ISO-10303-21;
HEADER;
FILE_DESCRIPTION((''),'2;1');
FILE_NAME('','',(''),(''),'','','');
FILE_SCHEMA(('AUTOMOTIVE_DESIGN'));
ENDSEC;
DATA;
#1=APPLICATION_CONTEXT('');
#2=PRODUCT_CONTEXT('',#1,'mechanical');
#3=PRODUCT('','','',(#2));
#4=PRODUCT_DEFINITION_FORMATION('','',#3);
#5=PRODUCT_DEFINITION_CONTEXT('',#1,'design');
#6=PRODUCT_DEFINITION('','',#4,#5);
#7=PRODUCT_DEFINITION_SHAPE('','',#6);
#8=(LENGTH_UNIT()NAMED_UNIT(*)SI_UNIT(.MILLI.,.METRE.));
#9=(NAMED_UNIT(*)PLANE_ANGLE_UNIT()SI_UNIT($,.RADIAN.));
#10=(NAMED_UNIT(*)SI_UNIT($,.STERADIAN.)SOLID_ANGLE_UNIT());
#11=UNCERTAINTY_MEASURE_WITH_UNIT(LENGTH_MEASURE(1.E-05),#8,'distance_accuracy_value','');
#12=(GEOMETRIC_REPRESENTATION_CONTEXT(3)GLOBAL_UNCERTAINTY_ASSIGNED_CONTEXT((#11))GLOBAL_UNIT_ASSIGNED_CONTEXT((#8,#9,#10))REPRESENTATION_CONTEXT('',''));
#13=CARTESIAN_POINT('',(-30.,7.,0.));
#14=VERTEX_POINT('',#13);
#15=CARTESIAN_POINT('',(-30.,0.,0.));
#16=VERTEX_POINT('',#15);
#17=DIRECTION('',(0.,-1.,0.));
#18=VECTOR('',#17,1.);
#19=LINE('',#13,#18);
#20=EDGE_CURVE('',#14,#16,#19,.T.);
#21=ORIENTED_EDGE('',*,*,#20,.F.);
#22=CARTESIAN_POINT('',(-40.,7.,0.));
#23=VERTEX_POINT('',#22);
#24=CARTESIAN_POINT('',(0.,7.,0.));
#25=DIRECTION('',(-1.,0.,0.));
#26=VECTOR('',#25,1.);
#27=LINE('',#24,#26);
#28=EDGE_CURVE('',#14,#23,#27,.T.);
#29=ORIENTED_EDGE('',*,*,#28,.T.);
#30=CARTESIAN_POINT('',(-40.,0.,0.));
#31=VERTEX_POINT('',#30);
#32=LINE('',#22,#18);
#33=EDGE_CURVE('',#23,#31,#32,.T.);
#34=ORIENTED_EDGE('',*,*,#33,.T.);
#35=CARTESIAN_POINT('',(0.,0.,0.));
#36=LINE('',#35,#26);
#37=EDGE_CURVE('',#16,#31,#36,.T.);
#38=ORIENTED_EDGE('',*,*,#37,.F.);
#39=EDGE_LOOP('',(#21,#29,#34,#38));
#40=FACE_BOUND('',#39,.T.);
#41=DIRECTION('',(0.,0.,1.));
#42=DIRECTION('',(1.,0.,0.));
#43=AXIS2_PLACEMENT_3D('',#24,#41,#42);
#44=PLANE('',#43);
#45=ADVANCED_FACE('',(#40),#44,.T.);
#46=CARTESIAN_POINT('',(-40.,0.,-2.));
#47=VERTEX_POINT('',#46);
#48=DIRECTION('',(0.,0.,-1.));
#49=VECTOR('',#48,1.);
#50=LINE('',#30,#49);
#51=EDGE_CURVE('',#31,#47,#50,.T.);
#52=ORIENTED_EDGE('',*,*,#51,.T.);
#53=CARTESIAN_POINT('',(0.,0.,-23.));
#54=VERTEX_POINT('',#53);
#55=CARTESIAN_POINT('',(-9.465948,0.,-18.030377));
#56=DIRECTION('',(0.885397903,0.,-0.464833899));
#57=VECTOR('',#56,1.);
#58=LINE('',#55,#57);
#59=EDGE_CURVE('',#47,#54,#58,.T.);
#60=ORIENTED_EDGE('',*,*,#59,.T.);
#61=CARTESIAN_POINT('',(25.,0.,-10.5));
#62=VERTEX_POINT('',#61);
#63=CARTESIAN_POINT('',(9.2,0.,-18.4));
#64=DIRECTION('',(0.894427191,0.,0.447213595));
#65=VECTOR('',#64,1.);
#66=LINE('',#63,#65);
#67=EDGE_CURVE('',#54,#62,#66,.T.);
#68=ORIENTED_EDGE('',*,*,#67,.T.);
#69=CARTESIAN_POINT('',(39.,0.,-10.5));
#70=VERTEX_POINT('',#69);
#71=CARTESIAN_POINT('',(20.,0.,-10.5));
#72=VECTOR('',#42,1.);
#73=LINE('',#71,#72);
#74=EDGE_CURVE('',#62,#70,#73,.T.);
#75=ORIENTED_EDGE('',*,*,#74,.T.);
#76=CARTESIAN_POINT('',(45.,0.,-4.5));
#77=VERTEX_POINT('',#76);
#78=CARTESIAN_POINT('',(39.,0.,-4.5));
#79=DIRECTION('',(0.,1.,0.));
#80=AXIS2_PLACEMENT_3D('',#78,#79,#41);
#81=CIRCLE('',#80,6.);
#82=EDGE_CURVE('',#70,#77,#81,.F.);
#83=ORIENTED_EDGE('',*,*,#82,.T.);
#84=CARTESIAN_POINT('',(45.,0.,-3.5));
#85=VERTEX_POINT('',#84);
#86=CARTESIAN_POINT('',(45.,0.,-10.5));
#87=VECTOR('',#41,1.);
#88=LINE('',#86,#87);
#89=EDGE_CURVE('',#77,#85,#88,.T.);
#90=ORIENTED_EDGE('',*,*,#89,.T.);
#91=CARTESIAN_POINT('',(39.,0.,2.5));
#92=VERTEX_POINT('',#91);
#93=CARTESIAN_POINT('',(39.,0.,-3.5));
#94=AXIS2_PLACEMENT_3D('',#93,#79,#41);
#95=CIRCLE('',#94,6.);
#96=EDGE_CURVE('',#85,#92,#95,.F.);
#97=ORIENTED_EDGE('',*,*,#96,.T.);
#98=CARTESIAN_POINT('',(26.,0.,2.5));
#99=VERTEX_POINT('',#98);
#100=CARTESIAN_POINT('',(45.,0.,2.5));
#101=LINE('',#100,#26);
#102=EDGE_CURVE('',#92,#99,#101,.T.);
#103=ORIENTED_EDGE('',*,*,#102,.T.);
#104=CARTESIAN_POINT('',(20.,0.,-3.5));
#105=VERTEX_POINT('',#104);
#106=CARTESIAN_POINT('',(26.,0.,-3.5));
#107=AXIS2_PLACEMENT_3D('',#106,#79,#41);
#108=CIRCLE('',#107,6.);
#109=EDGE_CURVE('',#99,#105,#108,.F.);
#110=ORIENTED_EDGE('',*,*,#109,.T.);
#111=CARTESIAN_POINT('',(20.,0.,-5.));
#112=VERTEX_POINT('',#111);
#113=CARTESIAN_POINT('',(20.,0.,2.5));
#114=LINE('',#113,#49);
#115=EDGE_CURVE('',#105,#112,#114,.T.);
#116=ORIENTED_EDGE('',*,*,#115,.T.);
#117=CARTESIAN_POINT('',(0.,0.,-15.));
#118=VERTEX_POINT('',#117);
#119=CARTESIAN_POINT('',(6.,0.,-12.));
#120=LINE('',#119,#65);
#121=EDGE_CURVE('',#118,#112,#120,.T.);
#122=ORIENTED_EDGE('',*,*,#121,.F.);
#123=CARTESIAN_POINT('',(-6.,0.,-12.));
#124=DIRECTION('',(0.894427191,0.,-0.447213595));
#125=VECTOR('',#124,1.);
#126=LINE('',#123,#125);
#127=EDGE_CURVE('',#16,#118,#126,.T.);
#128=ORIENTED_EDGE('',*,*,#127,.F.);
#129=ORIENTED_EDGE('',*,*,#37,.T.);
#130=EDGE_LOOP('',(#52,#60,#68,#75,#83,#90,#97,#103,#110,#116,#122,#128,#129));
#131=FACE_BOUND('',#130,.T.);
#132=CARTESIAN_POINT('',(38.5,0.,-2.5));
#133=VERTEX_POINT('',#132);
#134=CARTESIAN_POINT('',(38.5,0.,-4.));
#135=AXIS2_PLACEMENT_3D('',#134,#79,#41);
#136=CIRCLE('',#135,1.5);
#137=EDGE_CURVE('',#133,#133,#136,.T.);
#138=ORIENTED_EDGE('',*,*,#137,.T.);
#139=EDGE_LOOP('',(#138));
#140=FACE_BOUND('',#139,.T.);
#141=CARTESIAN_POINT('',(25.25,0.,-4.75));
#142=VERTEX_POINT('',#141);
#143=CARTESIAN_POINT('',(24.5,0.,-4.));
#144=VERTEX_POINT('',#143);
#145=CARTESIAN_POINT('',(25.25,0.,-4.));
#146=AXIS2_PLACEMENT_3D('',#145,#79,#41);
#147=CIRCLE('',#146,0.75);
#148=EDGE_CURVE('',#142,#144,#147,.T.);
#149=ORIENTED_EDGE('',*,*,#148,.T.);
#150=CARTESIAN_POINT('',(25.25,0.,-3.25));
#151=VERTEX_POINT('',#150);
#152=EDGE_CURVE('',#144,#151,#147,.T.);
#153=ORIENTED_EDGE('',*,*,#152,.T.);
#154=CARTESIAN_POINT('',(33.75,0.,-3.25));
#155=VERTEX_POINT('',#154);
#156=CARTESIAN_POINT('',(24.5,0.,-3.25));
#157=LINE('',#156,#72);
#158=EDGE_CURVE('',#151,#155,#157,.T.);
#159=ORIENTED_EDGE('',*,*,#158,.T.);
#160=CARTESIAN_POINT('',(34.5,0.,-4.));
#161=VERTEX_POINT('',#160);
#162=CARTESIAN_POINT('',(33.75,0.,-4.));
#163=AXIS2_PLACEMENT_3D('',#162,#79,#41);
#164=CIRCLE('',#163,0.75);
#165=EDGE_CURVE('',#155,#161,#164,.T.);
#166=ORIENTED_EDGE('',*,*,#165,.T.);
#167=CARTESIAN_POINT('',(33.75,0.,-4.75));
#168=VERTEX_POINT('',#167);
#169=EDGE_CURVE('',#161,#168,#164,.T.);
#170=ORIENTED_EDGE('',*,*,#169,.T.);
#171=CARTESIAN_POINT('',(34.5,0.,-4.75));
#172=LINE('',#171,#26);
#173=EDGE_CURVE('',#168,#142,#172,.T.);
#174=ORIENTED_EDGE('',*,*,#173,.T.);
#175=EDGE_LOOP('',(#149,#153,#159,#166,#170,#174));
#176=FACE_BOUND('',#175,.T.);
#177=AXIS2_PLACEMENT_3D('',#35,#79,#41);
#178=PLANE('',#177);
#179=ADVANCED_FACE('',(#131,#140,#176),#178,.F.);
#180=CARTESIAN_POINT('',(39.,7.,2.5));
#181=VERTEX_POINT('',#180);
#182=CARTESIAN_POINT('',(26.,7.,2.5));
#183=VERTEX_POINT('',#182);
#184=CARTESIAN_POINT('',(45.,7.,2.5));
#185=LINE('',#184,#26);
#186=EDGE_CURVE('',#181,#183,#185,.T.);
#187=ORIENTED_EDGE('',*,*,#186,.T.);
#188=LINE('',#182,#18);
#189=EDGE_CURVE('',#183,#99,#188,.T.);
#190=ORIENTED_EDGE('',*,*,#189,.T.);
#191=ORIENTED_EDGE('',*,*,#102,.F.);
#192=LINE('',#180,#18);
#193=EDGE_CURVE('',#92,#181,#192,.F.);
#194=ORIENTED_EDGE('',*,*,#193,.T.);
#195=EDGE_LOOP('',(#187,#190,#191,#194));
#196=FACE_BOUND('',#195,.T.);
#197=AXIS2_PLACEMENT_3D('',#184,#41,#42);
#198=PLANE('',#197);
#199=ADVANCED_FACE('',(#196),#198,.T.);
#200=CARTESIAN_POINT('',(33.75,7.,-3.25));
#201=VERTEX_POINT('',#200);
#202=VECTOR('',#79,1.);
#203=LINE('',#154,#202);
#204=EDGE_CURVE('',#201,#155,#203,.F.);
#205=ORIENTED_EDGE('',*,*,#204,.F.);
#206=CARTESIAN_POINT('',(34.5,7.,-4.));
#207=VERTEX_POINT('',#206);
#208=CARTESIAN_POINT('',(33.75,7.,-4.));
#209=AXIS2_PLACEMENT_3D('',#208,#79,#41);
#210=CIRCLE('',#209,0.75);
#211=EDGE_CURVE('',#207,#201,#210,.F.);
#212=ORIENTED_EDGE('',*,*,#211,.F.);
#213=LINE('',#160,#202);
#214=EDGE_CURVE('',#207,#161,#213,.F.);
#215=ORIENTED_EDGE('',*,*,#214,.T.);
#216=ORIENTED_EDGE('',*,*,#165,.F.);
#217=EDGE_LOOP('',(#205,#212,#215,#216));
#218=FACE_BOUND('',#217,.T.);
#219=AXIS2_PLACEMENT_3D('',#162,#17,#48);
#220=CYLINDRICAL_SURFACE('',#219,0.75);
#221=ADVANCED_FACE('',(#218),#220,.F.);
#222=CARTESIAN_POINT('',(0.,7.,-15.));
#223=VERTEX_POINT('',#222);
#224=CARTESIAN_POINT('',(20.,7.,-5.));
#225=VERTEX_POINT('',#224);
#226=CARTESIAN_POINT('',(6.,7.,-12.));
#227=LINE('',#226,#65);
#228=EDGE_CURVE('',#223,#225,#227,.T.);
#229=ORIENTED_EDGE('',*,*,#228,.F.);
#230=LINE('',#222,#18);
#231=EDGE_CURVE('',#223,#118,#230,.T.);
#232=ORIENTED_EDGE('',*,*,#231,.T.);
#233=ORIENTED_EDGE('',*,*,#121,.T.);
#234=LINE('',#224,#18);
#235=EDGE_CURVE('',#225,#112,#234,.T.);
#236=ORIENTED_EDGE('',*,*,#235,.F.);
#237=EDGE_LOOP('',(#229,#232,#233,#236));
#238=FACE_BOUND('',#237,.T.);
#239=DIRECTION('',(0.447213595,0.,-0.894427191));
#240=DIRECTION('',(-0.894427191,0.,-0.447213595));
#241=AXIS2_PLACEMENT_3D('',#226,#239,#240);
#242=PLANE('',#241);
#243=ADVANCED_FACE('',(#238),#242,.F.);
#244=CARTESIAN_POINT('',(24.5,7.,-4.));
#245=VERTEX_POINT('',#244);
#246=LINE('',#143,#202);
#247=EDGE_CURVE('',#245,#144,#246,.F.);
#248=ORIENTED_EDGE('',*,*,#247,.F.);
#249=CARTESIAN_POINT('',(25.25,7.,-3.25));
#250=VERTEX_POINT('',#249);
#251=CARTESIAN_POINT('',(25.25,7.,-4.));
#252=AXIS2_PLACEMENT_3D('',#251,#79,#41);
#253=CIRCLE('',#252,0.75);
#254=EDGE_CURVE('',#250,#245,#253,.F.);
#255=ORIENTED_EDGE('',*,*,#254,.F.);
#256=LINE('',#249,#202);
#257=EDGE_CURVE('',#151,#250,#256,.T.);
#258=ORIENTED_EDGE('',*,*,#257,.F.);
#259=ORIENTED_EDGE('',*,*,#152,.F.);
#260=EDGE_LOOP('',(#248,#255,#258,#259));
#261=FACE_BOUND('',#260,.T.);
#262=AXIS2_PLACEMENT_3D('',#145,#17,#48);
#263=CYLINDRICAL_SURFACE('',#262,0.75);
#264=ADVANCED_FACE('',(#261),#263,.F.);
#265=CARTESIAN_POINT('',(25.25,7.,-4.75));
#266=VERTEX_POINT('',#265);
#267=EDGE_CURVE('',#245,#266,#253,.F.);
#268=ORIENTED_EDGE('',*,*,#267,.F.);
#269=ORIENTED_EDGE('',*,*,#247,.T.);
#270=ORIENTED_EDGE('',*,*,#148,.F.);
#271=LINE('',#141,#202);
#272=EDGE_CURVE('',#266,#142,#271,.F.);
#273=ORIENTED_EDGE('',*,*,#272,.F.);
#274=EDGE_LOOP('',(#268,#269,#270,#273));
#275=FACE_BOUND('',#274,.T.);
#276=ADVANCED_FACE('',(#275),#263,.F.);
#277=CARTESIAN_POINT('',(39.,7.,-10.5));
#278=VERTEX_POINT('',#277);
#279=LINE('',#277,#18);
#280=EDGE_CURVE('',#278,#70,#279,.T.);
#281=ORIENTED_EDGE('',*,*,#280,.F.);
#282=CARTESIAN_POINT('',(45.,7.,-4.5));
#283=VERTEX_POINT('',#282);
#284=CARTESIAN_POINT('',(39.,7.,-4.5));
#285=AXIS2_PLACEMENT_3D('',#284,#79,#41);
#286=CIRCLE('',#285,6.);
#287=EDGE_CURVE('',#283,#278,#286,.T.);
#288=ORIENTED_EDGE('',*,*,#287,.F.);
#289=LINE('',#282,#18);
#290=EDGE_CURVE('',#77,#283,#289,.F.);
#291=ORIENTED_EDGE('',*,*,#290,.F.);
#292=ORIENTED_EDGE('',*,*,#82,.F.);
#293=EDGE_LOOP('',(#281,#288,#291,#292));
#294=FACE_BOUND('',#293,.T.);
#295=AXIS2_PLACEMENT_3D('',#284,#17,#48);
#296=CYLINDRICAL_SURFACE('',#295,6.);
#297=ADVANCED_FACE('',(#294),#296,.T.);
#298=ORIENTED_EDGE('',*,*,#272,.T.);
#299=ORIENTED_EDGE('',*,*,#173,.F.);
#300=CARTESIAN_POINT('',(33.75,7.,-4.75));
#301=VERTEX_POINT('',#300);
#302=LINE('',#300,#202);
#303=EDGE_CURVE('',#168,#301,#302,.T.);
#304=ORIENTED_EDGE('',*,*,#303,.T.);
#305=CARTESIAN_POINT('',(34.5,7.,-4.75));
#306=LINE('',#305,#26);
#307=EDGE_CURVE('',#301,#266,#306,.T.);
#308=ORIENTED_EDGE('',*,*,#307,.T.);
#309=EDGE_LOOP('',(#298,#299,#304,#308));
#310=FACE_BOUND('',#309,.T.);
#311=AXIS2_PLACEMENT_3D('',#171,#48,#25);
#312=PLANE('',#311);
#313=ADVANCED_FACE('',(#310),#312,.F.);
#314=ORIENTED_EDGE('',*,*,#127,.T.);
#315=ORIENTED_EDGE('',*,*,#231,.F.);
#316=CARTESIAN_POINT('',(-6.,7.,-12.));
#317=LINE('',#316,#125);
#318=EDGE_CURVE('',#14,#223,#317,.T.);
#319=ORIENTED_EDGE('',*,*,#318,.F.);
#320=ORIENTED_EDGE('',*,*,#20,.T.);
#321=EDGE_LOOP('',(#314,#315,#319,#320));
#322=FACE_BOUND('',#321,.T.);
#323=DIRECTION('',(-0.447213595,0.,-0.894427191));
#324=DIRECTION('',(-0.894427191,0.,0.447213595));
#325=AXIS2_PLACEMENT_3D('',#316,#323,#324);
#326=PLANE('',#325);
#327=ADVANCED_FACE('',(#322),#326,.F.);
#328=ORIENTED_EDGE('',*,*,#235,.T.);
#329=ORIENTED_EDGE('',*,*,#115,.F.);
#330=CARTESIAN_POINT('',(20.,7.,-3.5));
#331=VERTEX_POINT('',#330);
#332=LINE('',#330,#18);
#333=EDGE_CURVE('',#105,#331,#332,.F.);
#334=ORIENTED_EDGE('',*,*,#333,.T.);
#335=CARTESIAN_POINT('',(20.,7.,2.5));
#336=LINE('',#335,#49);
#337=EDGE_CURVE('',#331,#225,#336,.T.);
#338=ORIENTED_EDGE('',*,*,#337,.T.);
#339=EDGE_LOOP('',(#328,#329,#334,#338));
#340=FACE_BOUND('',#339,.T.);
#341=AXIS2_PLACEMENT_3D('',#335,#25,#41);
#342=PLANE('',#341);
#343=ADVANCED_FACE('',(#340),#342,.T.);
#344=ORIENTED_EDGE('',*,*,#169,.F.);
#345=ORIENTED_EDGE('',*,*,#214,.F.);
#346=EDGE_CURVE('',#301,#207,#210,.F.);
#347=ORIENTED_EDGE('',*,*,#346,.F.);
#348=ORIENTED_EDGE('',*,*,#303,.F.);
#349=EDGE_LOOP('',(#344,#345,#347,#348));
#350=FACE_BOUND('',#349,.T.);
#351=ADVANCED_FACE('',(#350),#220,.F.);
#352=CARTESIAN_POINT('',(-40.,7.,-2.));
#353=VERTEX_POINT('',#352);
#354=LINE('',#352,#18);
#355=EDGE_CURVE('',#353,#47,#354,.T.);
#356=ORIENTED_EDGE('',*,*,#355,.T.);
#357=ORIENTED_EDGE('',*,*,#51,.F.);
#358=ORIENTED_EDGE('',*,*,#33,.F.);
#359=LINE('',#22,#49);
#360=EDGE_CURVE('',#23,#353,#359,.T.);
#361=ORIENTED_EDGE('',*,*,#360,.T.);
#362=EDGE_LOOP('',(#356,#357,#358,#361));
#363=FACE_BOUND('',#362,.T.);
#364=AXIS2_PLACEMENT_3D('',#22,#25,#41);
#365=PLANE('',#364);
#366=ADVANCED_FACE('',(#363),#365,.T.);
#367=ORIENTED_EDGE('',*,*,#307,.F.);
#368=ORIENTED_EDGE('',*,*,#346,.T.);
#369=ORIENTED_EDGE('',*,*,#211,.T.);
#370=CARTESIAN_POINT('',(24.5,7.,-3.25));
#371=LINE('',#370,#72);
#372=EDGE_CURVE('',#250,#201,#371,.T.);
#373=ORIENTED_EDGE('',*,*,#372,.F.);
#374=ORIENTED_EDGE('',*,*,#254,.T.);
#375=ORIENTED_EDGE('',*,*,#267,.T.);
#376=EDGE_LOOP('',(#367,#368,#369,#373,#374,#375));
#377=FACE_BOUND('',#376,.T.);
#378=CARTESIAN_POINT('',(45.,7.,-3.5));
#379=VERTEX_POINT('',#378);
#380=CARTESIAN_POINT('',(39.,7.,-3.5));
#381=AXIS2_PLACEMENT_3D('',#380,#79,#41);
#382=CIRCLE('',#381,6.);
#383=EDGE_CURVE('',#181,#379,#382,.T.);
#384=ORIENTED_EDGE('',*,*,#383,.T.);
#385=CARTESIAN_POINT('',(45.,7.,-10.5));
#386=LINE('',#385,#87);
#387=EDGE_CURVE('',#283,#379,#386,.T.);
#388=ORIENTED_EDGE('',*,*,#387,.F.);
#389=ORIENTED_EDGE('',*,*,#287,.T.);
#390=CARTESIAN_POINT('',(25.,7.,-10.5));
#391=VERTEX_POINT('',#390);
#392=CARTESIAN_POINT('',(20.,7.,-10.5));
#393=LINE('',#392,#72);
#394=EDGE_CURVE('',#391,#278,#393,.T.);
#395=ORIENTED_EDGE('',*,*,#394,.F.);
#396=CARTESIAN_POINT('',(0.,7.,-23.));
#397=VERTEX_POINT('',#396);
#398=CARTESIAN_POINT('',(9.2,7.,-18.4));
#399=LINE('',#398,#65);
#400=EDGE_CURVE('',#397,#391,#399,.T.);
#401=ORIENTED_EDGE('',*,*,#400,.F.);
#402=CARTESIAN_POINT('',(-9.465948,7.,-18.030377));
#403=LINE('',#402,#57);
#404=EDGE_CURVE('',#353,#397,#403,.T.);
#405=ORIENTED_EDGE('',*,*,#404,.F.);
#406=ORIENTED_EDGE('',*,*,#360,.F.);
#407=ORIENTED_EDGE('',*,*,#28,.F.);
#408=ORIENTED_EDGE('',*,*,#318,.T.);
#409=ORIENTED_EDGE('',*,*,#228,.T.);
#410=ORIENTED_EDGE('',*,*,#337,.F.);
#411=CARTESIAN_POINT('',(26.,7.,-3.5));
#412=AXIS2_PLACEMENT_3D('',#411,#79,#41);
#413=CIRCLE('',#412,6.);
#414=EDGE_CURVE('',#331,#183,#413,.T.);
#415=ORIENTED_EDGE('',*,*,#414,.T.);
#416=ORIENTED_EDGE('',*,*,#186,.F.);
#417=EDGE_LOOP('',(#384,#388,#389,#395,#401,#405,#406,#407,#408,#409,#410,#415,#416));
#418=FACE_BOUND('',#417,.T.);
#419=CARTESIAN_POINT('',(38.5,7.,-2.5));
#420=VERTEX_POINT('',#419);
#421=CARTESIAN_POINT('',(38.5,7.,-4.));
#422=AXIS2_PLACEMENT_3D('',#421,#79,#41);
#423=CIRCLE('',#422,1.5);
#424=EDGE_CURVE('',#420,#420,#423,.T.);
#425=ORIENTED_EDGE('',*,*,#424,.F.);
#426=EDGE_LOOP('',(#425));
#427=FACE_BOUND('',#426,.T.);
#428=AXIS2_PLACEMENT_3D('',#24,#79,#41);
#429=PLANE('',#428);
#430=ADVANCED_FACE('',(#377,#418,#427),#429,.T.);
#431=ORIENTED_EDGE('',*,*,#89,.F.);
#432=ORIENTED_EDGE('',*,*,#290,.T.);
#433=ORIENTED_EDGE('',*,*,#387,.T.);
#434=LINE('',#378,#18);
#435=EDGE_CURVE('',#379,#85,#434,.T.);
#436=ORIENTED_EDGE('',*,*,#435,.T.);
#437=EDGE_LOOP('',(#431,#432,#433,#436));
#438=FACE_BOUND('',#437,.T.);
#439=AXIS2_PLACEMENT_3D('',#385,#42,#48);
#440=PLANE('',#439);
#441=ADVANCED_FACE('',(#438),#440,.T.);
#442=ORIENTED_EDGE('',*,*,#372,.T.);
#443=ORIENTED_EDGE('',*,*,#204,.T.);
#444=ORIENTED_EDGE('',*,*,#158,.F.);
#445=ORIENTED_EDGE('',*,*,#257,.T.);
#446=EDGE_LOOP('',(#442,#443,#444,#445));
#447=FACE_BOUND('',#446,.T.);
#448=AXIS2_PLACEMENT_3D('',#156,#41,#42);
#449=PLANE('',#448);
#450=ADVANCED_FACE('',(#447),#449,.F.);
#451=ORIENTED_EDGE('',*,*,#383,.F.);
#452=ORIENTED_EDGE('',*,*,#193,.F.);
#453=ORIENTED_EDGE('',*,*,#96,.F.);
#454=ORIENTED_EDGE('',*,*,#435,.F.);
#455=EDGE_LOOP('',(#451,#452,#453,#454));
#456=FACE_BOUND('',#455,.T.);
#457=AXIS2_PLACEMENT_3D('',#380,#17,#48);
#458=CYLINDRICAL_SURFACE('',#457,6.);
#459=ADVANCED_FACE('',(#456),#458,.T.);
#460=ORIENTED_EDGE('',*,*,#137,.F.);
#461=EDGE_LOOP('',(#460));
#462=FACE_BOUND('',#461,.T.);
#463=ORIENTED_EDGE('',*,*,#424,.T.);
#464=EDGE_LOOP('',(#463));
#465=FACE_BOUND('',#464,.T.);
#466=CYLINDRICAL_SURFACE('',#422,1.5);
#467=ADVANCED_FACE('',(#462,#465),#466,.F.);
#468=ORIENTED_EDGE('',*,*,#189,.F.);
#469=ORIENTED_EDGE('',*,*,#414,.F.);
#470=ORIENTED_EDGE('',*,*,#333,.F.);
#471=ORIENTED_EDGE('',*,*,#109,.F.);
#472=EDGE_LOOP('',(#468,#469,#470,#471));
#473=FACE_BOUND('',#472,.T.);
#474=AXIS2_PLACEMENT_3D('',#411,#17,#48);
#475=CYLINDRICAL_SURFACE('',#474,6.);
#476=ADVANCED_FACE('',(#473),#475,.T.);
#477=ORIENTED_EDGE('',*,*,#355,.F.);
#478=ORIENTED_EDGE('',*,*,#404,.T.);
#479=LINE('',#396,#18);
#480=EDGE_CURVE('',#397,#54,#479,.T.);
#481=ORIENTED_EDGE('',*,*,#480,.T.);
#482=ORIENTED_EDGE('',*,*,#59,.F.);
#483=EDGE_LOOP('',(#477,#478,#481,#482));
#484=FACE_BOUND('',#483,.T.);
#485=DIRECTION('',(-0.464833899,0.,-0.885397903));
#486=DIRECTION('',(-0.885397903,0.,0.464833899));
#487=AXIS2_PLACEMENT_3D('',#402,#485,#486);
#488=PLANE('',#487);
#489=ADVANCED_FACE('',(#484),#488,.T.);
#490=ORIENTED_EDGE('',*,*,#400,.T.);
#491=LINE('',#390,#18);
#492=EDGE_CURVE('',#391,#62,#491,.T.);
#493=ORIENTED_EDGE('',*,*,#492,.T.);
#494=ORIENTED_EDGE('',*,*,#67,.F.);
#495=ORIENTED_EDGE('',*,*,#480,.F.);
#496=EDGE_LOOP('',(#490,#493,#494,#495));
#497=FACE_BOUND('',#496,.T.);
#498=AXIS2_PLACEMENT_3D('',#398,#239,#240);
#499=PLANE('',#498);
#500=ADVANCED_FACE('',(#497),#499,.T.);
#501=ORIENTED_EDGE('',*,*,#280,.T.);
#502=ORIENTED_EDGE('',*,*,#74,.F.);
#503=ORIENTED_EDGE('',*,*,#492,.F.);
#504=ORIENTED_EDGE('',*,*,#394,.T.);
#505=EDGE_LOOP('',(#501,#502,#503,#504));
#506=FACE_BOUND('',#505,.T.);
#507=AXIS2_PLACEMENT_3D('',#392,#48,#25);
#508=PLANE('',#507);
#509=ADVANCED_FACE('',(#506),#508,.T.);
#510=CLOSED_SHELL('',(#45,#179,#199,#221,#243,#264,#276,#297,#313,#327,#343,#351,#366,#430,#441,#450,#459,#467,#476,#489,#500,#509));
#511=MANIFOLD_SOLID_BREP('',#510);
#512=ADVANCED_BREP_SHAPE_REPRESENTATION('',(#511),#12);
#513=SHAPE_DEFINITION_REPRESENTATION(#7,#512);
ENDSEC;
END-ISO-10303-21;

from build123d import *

# Parameters (mm, degrees)
SKETCH1_W                = 25
SKETCH1_H                = 13
BOSS_EXTRUDE1_DEPTH      = 7
F_3_0_3_DIAMETER_HOLE3_D = 3
FILLET7_R                = 6
CUT_EXTRUDE1_DEPTH       = 52.019604075
FILLET8_R                = 0.75


with BuildPart() as part:
    # Sketch1 → Boss-Extrude1 (new body)
    with BuildSketch(Plane(origin=(0, 0, 0), x_dir=(1, 0, 0), z_dir=(0, 1, 0))):
        Polygon((-40, 0), (-30, 0), (0, 15), (20, 5), (20, 10.5), (25, 10.5), (0, 23), (-40, 2), align=None)
        with Locations((32.5, 4)):
            Rectangle(SKETCH1_W, SKETCH1_H)
    extrude(amount=BOSS_EXTRUDE1_DEPTH)

    # Ø3.0 (3) Diameter Hole3 (through all)
    with Locations(Plane(origin=(0, 7, 0), x_dir=(1, 0, 0), z_dir=(0, 1, 0))):
        with Locations((38.5, 4)):
            Hole(F_3_0_3_DIAMETER_HOLE3_D / 2)

    # Fillet7
    fillet7_edges = [part.edges().sort_by_distance(p)[0] for p in [
        (20, 3.5, 2.5),
        (45, 3.5, 2.5),
        (45, 3.5, -10.5),
    ]]
    fillet(fillet7_edges, radius=FILLET7_R)

    # Sketch11 → Cut-Extrude1 (cut, through all)
    with BuildSketch(Plane(origin=(0, 7, 0), x_dir=(1, 0, 0), z_dir=(0, 1, 0))):
        Polygon((24.5, 4), (24.5, 3.25), (34.5, 3.25), (34.5, 4.75), (24.5, 4.75), align=None)
    extrude(amount=-CUT_EXTRUDE1_DEPTH, mode=Mode.SUBTRACT)

    # Fillet8
    fillet8_edges = [part.edges().sort_by_distance(p)[0] for p in [
        (34.5, 3.5, -3.25),
        (34.5, 3.5, -4.75),
        (24.5, 3.5, -4.75),
        (24.5, 3.5, -3.25),
    ]]
    fillet(fillet8_edges, radius=FILLET8_R - 0.0001)  # a hair under: the kernel refuses the full size


solid = part.part
